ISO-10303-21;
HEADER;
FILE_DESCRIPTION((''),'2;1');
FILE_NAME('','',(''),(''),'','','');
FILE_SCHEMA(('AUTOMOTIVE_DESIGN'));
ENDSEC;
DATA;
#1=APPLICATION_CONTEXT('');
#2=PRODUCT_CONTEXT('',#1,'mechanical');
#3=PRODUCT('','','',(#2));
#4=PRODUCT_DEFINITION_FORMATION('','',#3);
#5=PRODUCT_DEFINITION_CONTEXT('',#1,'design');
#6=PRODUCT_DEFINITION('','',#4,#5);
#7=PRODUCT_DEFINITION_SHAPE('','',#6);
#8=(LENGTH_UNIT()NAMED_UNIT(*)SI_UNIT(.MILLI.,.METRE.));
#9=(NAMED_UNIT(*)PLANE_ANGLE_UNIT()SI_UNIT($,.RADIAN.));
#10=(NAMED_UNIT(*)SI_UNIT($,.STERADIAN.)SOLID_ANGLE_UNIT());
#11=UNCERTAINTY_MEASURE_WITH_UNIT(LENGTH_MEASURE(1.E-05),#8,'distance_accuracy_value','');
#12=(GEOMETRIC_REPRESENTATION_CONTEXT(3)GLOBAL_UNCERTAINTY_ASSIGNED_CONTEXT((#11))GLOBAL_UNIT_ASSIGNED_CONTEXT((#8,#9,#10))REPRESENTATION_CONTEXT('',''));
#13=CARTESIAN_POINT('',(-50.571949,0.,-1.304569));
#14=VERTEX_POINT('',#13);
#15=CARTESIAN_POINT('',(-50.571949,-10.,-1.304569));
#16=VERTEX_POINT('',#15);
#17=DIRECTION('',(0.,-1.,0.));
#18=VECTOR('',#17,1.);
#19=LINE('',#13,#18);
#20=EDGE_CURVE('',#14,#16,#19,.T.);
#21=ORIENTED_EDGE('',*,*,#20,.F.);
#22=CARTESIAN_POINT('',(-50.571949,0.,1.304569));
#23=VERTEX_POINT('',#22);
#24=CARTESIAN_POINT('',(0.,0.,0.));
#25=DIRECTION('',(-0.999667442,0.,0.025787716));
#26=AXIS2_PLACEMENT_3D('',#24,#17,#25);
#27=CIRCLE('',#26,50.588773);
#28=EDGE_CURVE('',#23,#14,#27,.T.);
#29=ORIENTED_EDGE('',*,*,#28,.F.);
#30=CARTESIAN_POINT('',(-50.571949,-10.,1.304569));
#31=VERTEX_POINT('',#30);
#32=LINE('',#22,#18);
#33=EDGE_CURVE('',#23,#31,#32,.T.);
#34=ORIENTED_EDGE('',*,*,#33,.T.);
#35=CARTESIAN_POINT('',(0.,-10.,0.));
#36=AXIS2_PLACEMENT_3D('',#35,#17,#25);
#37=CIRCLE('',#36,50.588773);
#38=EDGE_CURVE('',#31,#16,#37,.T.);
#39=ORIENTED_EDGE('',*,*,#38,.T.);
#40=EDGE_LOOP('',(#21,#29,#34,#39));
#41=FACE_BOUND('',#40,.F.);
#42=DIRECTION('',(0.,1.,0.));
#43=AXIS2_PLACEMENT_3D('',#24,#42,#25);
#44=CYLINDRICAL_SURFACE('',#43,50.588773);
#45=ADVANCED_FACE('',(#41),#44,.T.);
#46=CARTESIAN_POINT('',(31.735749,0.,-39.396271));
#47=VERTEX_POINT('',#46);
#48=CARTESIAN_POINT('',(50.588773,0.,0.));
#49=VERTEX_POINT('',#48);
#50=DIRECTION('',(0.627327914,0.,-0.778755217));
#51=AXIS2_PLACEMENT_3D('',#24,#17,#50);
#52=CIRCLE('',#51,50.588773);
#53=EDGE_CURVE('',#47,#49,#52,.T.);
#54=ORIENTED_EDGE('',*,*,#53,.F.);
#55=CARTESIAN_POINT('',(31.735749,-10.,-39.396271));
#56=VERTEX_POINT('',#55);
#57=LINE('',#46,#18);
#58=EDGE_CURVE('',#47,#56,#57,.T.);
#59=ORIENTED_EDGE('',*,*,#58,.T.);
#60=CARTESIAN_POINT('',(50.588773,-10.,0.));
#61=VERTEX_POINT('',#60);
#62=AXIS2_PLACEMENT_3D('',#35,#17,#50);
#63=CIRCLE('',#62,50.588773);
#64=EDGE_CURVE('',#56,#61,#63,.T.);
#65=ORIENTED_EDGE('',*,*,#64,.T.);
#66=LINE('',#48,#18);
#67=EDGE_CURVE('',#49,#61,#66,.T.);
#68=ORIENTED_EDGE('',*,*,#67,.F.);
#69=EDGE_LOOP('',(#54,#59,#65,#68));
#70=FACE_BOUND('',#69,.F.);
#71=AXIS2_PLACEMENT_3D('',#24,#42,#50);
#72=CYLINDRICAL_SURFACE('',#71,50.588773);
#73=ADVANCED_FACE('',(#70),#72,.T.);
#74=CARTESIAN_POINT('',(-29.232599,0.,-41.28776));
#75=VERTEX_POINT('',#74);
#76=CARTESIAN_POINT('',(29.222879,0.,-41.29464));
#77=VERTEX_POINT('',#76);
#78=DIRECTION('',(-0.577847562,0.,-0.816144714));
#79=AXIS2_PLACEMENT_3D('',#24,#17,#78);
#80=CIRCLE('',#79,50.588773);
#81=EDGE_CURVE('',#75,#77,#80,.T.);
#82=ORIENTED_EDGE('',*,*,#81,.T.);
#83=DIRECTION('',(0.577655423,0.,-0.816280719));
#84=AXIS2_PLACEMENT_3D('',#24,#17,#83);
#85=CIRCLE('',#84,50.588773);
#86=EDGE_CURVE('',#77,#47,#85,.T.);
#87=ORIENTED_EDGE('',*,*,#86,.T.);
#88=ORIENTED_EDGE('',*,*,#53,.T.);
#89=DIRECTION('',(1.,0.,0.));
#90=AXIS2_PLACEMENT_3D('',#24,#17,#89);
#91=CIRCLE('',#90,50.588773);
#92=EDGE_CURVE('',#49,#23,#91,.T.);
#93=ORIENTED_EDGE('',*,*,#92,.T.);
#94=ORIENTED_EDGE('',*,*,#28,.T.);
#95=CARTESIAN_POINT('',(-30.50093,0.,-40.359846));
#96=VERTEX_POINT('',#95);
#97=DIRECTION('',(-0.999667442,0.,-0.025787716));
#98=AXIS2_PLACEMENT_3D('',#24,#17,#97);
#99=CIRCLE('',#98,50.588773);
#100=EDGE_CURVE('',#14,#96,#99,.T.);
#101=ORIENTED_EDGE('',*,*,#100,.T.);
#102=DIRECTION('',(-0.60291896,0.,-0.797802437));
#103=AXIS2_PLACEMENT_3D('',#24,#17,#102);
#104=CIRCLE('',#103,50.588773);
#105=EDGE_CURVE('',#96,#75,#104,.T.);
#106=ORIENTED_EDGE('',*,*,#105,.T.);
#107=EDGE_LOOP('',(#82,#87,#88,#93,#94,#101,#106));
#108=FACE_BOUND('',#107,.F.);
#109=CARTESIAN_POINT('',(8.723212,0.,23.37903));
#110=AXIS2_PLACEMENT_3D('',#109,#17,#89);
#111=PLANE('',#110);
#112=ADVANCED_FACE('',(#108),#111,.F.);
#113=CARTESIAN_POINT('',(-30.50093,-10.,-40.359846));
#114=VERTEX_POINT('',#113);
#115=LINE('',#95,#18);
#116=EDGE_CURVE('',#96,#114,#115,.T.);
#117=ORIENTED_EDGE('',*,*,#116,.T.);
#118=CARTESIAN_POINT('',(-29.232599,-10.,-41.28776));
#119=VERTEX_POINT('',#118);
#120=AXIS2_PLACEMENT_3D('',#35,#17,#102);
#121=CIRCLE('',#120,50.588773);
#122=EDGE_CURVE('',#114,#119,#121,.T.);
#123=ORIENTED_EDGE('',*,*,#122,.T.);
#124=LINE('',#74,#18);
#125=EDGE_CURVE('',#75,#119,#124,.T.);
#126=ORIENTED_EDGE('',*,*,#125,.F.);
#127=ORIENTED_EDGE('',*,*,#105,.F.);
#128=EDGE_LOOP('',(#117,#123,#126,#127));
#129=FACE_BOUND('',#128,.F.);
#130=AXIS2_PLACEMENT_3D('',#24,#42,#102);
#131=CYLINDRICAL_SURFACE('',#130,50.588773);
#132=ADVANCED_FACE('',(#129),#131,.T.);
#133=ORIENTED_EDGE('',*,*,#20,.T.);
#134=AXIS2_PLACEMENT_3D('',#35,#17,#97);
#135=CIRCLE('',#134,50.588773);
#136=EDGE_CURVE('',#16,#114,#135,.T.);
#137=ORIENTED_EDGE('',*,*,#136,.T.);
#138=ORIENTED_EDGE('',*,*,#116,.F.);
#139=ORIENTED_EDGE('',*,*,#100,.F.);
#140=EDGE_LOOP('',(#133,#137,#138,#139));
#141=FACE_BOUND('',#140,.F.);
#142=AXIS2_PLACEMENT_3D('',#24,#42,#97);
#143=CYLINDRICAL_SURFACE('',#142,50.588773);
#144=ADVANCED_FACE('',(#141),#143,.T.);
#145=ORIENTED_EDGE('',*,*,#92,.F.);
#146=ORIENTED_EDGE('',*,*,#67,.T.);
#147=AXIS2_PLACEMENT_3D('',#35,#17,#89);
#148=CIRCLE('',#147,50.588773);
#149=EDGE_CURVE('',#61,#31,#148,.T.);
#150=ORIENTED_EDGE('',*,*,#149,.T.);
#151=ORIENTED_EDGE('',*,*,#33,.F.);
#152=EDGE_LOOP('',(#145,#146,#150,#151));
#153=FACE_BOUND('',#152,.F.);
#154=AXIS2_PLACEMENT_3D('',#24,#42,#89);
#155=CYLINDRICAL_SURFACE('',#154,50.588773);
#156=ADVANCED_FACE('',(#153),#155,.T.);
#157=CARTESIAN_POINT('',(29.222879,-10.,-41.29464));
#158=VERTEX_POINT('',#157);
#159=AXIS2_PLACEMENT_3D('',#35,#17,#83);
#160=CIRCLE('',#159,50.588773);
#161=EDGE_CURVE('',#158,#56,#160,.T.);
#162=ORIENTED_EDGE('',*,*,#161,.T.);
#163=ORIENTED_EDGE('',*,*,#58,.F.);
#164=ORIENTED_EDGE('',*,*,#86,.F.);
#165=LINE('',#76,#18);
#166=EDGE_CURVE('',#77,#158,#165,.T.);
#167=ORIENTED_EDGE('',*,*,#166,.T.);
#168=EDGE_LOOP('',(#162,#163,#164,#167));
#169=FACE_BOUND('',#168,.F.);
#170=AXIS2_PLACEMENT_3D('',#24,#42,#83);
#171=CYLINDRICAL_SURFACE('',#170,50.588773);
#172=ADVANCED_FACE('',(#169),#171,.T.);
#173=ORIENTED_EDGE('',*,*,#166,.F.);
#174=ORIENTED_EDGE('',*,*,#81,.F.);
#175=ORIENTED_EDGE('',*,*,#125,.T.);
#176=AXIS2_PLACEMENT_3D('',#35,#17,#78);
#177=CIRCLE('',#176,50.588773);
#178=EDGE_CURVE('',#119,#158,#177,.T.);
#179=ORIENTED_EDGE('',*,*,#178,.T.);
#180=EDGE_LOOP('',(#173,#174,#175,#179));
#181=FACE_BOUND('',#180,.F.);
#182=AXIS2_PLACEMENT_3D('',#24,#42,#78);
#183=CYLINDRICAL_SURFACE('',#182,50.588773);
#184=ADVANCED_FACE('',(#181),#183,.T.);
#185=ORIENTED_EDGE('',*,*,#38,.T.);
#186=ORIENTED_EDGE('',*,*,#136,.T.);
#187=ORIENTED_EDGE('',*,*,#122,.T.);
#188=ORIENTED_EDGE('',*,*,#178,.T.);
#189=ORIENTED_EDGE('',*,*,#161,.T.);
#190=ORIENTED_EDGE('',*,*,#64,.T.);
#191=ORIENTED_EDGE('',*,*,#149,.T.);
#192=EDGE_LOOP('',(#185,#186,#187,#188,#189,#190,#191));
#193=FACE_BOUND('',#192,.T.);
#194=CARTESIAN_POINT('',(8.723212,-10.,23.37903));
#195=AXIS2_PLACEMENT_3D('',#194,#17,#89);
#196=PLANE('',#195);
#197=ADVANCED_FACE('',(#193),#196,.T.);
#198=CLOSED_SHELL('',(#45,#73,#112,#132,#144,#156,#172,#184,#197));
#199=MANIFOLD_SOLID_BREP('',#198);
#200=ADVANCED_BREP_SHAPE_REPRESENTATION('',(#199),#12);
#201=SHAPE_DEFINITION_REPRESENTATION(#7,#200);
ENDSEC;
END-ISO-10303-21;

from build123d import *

# Parameters (mm, degrees)
F1_DEPTH = 10


# Not quite as in the source:
# - a feature names something its author has since deleted; it is built from what else it names


with BuildPart() as f1:
    # F0 (on Front) → F1 (new body)
    with BuildSketch(Plane.XZ):
        with BuildLine():
            ThreePointArc((0, 12.4140736889), (4.3797238065, 11.6158187371), (8.1961939537, 9.3237133283))
            Line((8.1961939537, 9.3237133283), (21.0697077151, 23.9681876437))
            ThreePointArc((21.0697077151, 23.9681876437), (18.4530079812, 27.8283575749), (18.0439527664, 32.4738611241))
            Line((18.0439527664, 32.4738611241), (12.5602155062, 33.3932852461))
            Line((12.5602155062, 33.3932852461), (7.5710593451, 36.5340338213))
            ThreePointArc((7.5710593451, 36.5340338213), (4.3242109258, 33.4682836339), (0, 32.3538112298))
            Line((0, 32.3538112298), (0, 12.4140736889))
        make_face()
        with BuildLine():
            ThreePointArc((-7.9262057201, 9.554291624), (-4.2131665816, 11.6772622181), (0, 12.4140736889))
            Line((0, 12.4140736889), (0, 32.3538112298))
            ThreePointArc((0, 32.3538112298), (-4.3563302657, 33.4861038791), (-7.6099407791, 36.5963641019))
            Line((-7.6099407791, 36.5963641019), (-12.278520326, 33.7106778775))
            Line((-12.278520326, 33.7106778775), (-17.78879081, 33.0882026957))
            ThreePointArc((-17.78879081, 33.0882026957), (-17.7466642393, 32.5900633313), (-17.73260723, 32.0903435349))
            ThreePointArc((-17.73260723, 32.0903435349), (-18.5760333574, 28.310954716), (-20.9462636845, 25.2487405378))
            Line((-20.9462636845, 25.2487405378), (-7.9262057201, 9.554291624))
        make_face()
        with BuildLine():
            Line((-12.278520326, 33.7106778775), (-7.6099407791, 36.5963641019))
            ThreePointArc((-7.6099407791, 36.5963641019), (-8.921680068, 41.9636267042), (-6.8304445709, 47.0778130421))
            ThreePointArc((-6.8304445709, 47.0778130421), (-17.0260006599, 47.3423785206), (-24.8514976267, 40.8016632631))
            ThreePointArc((-24.8514976267, 40.8016632631), (-20.0657845476, 38.0934673525), (-17.78879081, 33.0882026957))
            Line((-17.78879081, 33.0882026957), (-12.278520326, 33.7106778775))
        make_face()
        with BuildLine():
            ThreePointArc((-6.8304445709, 47.0778130421), (-8.921680068, 41.9636267042), (-7.6099407791, 36.5963641019))
            Line((-7.6099407791, 36.5963641019), (0, 41.3001291454))
            ThreePointArc((0, 41.3001291454), (-2.9563177988, 44.7314932731), (-6.8304445709, 47.0778130421))
        make_face()
        with BuildLine():
            ThreePointArc((-6.8304445709, 47.0778130421), (-2.9563177988, 44.7314932731), (0, 41.3001291454))
            ThreePointArc((0, 41.3001291454), (2.9670877078, 44.7179968563), (6.8263210631, 47.0826843755))
            ThreePointArc((6.8263210631, 47.0826843755), (-0.0031911285, 50.2464464918), (-6.8304445709, 47.0778130421))
        make_face()
        with BuildLine():
            Line((0, 41.3001291454), (7.5710593451, 36.5340338213))
            ThreePointArc((7.5710593451, 36.5340338213), (8.5956299393, 38.8198569439), (8.9463179156, 41.3001291454))
            ThreePointArc((8.9463179156, 41.3001291454), (8.3996143563, 44.3795906098), (6.8263210631, 47.0826843755))
            ThreePointArc((6.8263210631, 47.0826843755), (2.9670877078, 44.7179968563), (0, 41.3001291454))
        make_face()
        with BuildLine():
            Line((0, 41.3001291454), (0, 32.3538112298))
            ThreePointArc((0, 32.3538112298), (4.3242109258, 33.4682836339), (7.5710593451, 36.5340338213))
            Line((7.5710593451, 36.5340338213), (0, 41.3001291454))
        make_face()
        with BuildLine():
            ThreePointArc((-7.6099407791, 36.5963641019), (-4.3563302657, 33.4861038791), (0, 32.3538112298))
            Line((0, 32.3538112298), (0, 41.3001291454))
            Line((0, 41.3001291454), (-7.6099407791, 36.5963641019))
        make_face()
        with BuildLine():
            ThreePointArc((36.4223056753, 29.9139118839), (45.9083800473, 20.8806963335), (46.4937895072, 7.7947540314))
            ThreePointArc((46.4937895072, 7.7947540314), (49.4692239822, 4.3915233547), (50.5414702125, 0))
            ThreePointArc((50.5414702125, 0), (49.3916524089, -4.5377847699), (46.2196804198, -7.9804821571))
            ThreePointArc((46.2196804198, -7.9804821571), (45.2541028323, -22.5688235592), (34.2624022156, -32.2090809466))
            ThreePointArc((34.2624022156, -32.2090809466), (34.2845647661, -32.5811281227), (34.291956159, -32.953761518))
            ThreePointArc((34.291956159, -32.953761518), (33.6295574849, -36.4193105223), (31.7357494034, -39.3962708606))
            ThreePointArc((31.7357494034, -39.3962708606), (45.6327545118, -21.8374829955), (50.5887729434, 0))
            ThreePointArc((50.5887729434, 0), (0.6523386875, 50.5845668377), (-50.5719492199, 1.3045689002))
            ThreePointArc((-50.5719492199, 1.3045689002), (-49.1901644057, 5.1967911583), (-46.3448391854, 8.1905927165))
            ThreePointArc((-46.3448391854, 8.1905927165), (-45.5368746407, 21.848912941), (-35.4561087337, 31.0998954179))
            ThreePointArc((-35.4561087337, 31.0998954179), (-32.6224058372, 38.6491093328), (-24.8514976267, 40.8016632631))
            ThreePointArc((-24.8514976267, 40.8016632631), (-17.0260006599, 47.3423785206), (-6.8304445709, 47.0778130421))
            ThreePointArc((-6.8304445709, 47.0778130421), (-0.0031911285, 50.2464464918), (6.8263210631, 47.0826843755))
            ThreePointArc((6.8263210631, 47.0826843755), (17.6788975714, 47.324411831), (25.7932452382, 40.1137106881))
            ThreePointArc((25.7932452382, 40.1137106881), (33.2437406928, 37.9811469414), (36.4791003688, 30.9391189367))
            ThreePointArc((36.4791003688, 30.9391189367), (36.4648908183, 30.425729431), (36.4223056753, 29.9139118839))
        make_face()
        with BuildLine():
            ThreePointArc((-46.3448391854, 8.1905927165), (-40.2671562667, 9.9229363025), (-34.3745943291, 7.6388702415))
            Line((-34.3745943291, 7.6388702415), (-29.0687931112, 14.021677727))
            Line((-29.0687931112, 14.021677727), (-27.8149031494, 23.2813171291))
            ThreePointArc((-27.8149031494, 23.2813171291), (-32.9795051289, 25.8770971269), (-35.4561087337, 31.0998954179))
            ThreePointArc((-35.4561087337, 31.0998954179), (-45.5368746407, 21.848912941), (-46.3448391854, 8.1905927165))
        make_face()
        with BuildLine():
            ThreePointArc((-35.4561087337, 31.0998954179), (-32.9795051289, 25.8770971269), (-27.8149031494, 23.2813171291))
            Line((-27.8149031494, 23.2813171291), (-26.6220327467, 32.0903435349))
            ThreePointArc((-26.6220327467, 32.0903435349), (-31.1003542851, 32.1417240723), (-35.4561087337, 31.0998954179))
        make_face()
        with BuildLine():
            ThreePointArc((-35.4561087337, 31.0998954179), (-31.1003542851, 32.1417240723), (-26.6220327467, 32.0903435349))
            ThreePointArc((-26.6220327467, 32.0903435349), (-26.4240541647, 36.5856916795), (-24.8514976267, 40.8016632631))
            ThreePointArc((-24.8514976267, 40.8016632631), (-32.6224058372, 38.6491093328), (-35.4561087337, 31.0998954179))
        make_face()
        with BuildLine():
            ThreePointArc((-24.8514976267, 40.8016632631), (-26.4240541647, 36.5856916795), (-26.6220327467, 32.0903435349))
            Line((-26.6220327467, 32.0903435349), (-17.78879081, 33.0882026957))
            ThreePointArc((-17.78879081, 33.0882026957), (-20.0657845476, 38.0934673525), (-24.8514976267, 40.8016632631))
        make_face()
        with BuildLine():
            Line((-26.6220327467, 32.0903435349), (-20.9462636845, 25.2487405378))
            ThreePointArc((-20.9462636845, 25.2487405378), (-18.5760333574, 28.310954716), (-17.73260723, 32.0903435349))
            ThreePointArc((-17.73260723, 32.0903435349), (-17.7466642393, 32.5900633313), (-17.78879081, 33.0882026957))
            Line((-17.78879081, 33.0882026957), (-26.6220327467, 32.0903435349))
        make_face()
        with BuildLine():
            ThreePointArc((-27.8149031494, 23.2813171291), (-24.1742207002, 23.544578373), (-20.9462636845, 25.2487405378))
            Line((-20.9462636845, 25.2487405378), (-26.6220327467, 32.0903435349))
            Line((-26.6220327467, 32.0903435349), (-27.8149031494, 23.2813171291))
        make_face()
        with BuildLine():
            Line((-30.7910450859, 0), (-12.4140736889, 0))
            ThreePointArc((-12.4140736889, 0), (-11.2362299602, 5.27791264), (-7.9262057201, 9.554291624))
            Line((-7.9262057201, 9.554291624), (-20.9462636845, 25.2487405378))
            ThreePointArc((-20.9462636845, 25.2487405378), (-24.1742207002, 23.544578373), (-27.8149031494, 23.2813171291))
            Line((-27.8149031494, 23.2813171291), (-29.0687931112, 14.021677727))
            Line((-29.0687931112, 14.021677727), (-34.3745943291, 7.6388702415))
            ThreePointArc((-34.3745943291, 7.6388702415), (-31.7314462624, 4.2188317027), (-30.7910450859, 0))
        make_face()
        with BuildLine():
            ThreePointArc((-34.0750304122, -7.3795789352), (-31.6491009662, -4.0386490589), (-30.7910450859, 0))
            Line((-30.7910450859, 0), (-40.7245159149, 0))
            Line((-40.7245159149, 0), (-34.0750304122, -7.3795789352))
        make_face()
        with BuildLine():
            Line((-40.7245159149, 0), (-30.7910450859, 0))
            ThreePointArc((-30.7910450859, 0), (-31.7314462624, 4.2188317027), (-34.3745943291, 7.6388702415))
            Line((-34.3745943291, 7.6388702415), (-40.7245159149, 0))
        make_face()
        with BuildLine():
            Line((-40.7245159149, 0), (-34.3745943291, 7.6388702415))
            ThreePointArc((-34.3745943291, 7.6388702415), (-40.2671562667, 9.9229363025), (-46.3448391854, 8.1905927165))
            ThreePointArc((-46.3448391854, 8.1905927165), (-44.1031958217, 3.7051833857), (-40.7245159149, 0))
        make_face()
        with BuildLine():
            ThreePointArc((-46.139511468, -8.3277647585), (-43.9781949987, -3.8087367386), (-40.7245159149, 0))
            ThreePointArc((-40.7245159149, 0), (-44.1031958217, 3.7051833857), (-46.3448391854, 8.1905927165))
            ThreePointArc((-46.3448391854, 8.1905927165), (-49.1901644057, 5.1967911583), (-50.5719492199, 1.3045689002))
            ThreePointArc((-50.5719492199, 1.3045689002), (-50.5887729434, 0), (-50.5719492199, -1.3045689002))
            ThreePointArc((-50.5719492199, -1.3045689002), (-49.1249179099, -5.3016119279), (-46.139511468, -8.3277647585))
        make_face()
        with BuildLine():
            ThreePointArc((-46.139511468, -8.3277647585), (-39.9462129869, -9.9029332657), (-34.0750304122, -7.3795789352))
            Line((-34.0750304122, -7.3795789352), (-40.7245159149, 0))
            ThreePointArc((-40.7245159149, 0), (-43.9781949987, -3.8087367386), (-46.139511468, -8.3277647585))
        make_face()
        with BuildLine():
            ThreePointArc((-30.5009303557, -40.3598463247), (-33.0177016325, -36.8777345609), (-33.7279636415, -32.640427884))
            ThreePointArc((-33.7279636415, -32.640427884), (-44.9854308164, -23.0629718726), (-46.139511468, -8.3277647585))
            ThreePointArc((-46.139511468, -8.3277647585), (-49.1249179099, -5.3016119279), (-50.5719492199, -1.3045689002))
            ThreePointArc((-50.5719492199, -1.3045689002), (-44.9947955251, -23.1234150499), (-30.5009303557, -40.3598463247))
        make_face()
        with BuildLine():
            ThreePointArc((-33.7279636415, -32.640427884), (-31.3725828689, -26.9858355888), (-26.0396213441, -23.9722407284))
            Line((-26.0396213441, -23.9722407284), (-27.8331619734, -14.3067856835))
            Line((-27.8331619734, -14.3067856835), (-34.0750304122, -7.3795789352))
            ThreePointArc((-34.0750304122, -7.3795789352), (-39.9462129869, -9.9029332657), (-46.139511468, -8.3277647585))
            ThreePointArc((-46.139511468, -8.3277647585), (-44.9854308164, -23.0629718726), (-33.7279636415, -32.640427884))
        make_face()
        with BuildLine():
            Line((-18.7530413406, -25.632855502), (-7.3299455485, -10.0190380681))
            ThreePointArc((-7.3299455485, -10.0190380681), (-11.0703141267, -5.6175947424), (-12.4140736889, 0))
            Line((-12.4140736889, 0), (-30.7910450859, 0))
            ThreePointArc((-30.7910450859, 0), (-31.6491009662, -4.0386490589), (-34.0750304122, -7.3795789352))
            Line((-34.0750304122, -7.3795789352), (-27.8331619734, -14.3067856835))
            Line((-27.8331619734, -14.3067856835), (-26.0396213441, -23.9722407284))
            ThreePointArc((-26.0396213441, -23.9722407284), (-22.2247546471, -24.0496899951), (-18.7530413406, -25.632855502))
        make_face()
        with BuildLine():
            Line((-24.3195872754, -33.2415662706), (-18.7530413406, -25.632855502))
            ThreePointArc((-18.7530413406, -25.632855502), (-22.2247546471, -24.0496899951), (-26.0396213441, -23.9722407284))
            Line((-26.0396213441, -23.9722407284), (-24.3195872754, -33.2415662706))
        make_face()
        with BuildLine():
            Line((-24.3195872754, -33.2415662706), (-26.0396213441, -23.9722407284))
            ThreePointArc((-26.0396213441, -23.9722407284), (-31.3725828689, -26.9858355888), (-33.7279636415, -32.640427884))
            ThreePointArc((-33.7279636415, -32.640427884), (-29.0611287118, -33.5256103283), (-24.3195872754, -33.2415662706))
        make_face()
        with BuildLine():
            ThreePointArc((-22.7066374003, -42.5301240653), (-24.4011253438, -38.0400478438), (-24.3195872754, -33.2415662706))
            ThreePointArc((-24.3195872754, -33.2415662706), (-29.0611287118, -33.5256103283), (-33.7279636415, -32.640427884))
            ThreePointArc((-33.7279636415, -32.640427884), (-33.0177016325, -36.8777345609), (-30.5009303557, -40.3598463247))
            ThreePointArc((-30.5009303557, -40.3598463247), (-29.8703681269, -40.8287283157), (-29.2325991317, -41.2877596379))
            ThreePointArc((-29.2325991317, -41.2877596379), (-26.0826725293, -42.5027996438), (-22.7066374003, -42.5301240653))
        make_face()
        with BuildLine():
            Line((-15.0911921565, -35.1691649674), (-24.3195872754, -33.2415662706))
            ThreePointArc((-24.3195872754, -33.2415662706), (-24.4011253438, -38.0400478438), (-22.7066374003, -42.5301240653))
            ThreePointArc((-22.7066374003, -42.5301240653), (-17.7675173712, -40.0201570663), (-15.0911921565, -35.1691649674))
        make_face()
        with BuildLine():
            ThreePointArc((-14.8920259149, -33.2415662706), (-15.9125108938, -28.9754228225), (-18.7530413406, -25.632855502))
            Line((-18.7530413406, -25.632855502), (-24.3195872754, -33.2415662706))
            Line((-24.3195872754, -33.2415662706), (-15.0911921565, -35.1691649674))
            ThreePointArc((-15.0911921565, -35.1691649674), (-14.9419496612, -34.2104965993), (-14.8920259149, -33.2415662706))
        make_face()
        with BuildLine():
            Line((0, -31.5046176402), (0, -12.4140736889))
            ThreePointArc((0, -12.4140736889), (-3.8556548526, -11.8001335252), (-7.3299455485, -10.0190380681))
            Line((-7.3299455485, -10.0190380681), (-18.7530413406, -25.632855502))
            ThreePointArc((-18.7530413406, -25.632855502), (-15.9125108938, -28.9754228225), (-14.8920259149, -33.2415662706))
            ThreePointArc((-14.8920259149, -33.2415662706), (-14.9419496612, -34.2104965993), (-15.0911921565, -35.1691649674))
            Line((-15.0911921565, -35.1691649674), (-11.8124056821, -35.854027769))
            Line((-11.8124056821, -35.854027769), (-8.5237688791, -37.209996633))
            ThreePointArc((-8.5237688791, -37.209996633), (-5.1284984488, -33.0625960348), (0, -31.5046176402))
        make_face()
        with BuildLine():
            ThreePointArc((-6.3531457642, -47.4061283415), (-9.0178114186, -42.6442863227), (-8.5237688791, -37.209996633))
            Line((-8.5237688791, -37.209996633), (-11.8124056821, -35.854027769))
            Line((-11.8124056821, -35.854027769), (-15.0911921565, -35.1691649674))
            ThreePointArc((-15.0911921565, -35.1691649674), (-17.7675173712, -40.0201570663), (-22.7066374003, -42.5301240653))
            ThreePointArc((-22.7066374003, -42.5301240653), (-15.4632390175, -48.0984535393), (-6.3531457642, -47.4061283415))
        make_face()
        with BuildLine():
            ThreePointArc((29.2228790167, -41.2946399656), (26.2897143388, -42.2464687444), (23.206366099, -42.197512799))
            ThreePointArc((23.206366099, -42.197512799), (15.8115613872, -47.9336831156), (6.4750778857, -47.288034253))
            ThreePointArc((6.4750778857, -47.288034253), (0.0848729286, -49.9440160857), (-6.3531457642, -47.4061283415))
            ThreePointArc((-6.3531457642, -47.4061283415), (-15.4632390175, -48.0984535393), (-22.7066374003, -42.5301240653))
            ThreePointArc((-22.7066374003, -42.5301240653), (-26.0826725293, -42.5027996438), (-29.2325991317, -41.2877596379))
            ThreePointArc((-29.2325991317, -41.2877596379), (-0.0059544006, -50.588772593), (29.2228790167, -41.2946399656))
        make_face()
        with BuildLine():
            Line((19.2309829091, -25.4560439964), (7.4830019114, -9.905246486))
            ThreePointArc((7.4830019114, -9.905246486), (3.9461858655, -11.7701674869), (0, -12.4140736889))
            Line((0, -12.4140736889), (0, -31.5046176402))
            ThreePointArc((0, -31.5046176402), (5.0176698122, -32.9895625997), (8.4190600767, -36.9660706339))
            Line((8.4190600767, -36.9660706339), (11.9896721342, -35.3720759819))
            Line((11.9896721342, -35.3720759819), (15.6591926585, -34.6844592594))
            ThreePointArc((15.6591926585, -34.6844592594), (16.1319190758, -29.5619993381), (19.2309829091, -25.4560439964))
        make_face()
        with BuildLine():
            ThreePointArc((23.206366099, -42.197512799), (18.2657550813, -39.6133102694), (15.6591926585, -34.6844592594))
            Line((15.6591926585, -34.6844592594), (11.9896721342, -35.3720759819))
            Line((11.9896721342, -35.3720759819), (8.4190600767, -36.9660706339))
            ThreePointArc((8.4190600767, -36.9660706339), (9.0174636571, -38.8031052324), (9.2198945494, -40.7245121896))
            ThreePointArc((9.2198945494, -40.7245121896), (8.5060563956, -44.2816824271), (6.4750778857, -47.288034253))
            ThreePointArc((6.4750778857, -47.288034253), (15.8115613872, -47.9336831156), (23.206366099, -42.197512799))
        make_face()
        with BuildLine():
            ThreePointArc((8.4190600767, -36.9660706339), (5.0176698122, -32.9895625997), (0, -31.5046176402))
            Line((0, -31.5046176402), (0, -40.7245121896))
            Line((0, -40.7245121896), (8.4190600767, -36.9660706339))
        make_face()
        with BuildLine():
            Line((0, -40.7245121896), (0, -31.5046176402))
            ThreePointArc((0, -31.5046176402), (-5.1284984488, -33.0625960348), (-8.5237688791, -37.209996633))
            Line((-8.5237688791, -37.209996633), (0, -40.7245121896))
        make_face()
        with BuildLine():
            Line((0, -40.7245121896), (-8.5237688791, -37.209996633))
            ThreePointArc((-8.5237688791, -37.209996633), (-9.0178114186, -42.6442863227), (-6.3531457642, -47.4061283415))
            ThreePointArc((-6.3531457642, -47.4061283415), (-2.5528912915, -44.6583414697), (0, -40.7245121896))
        make_face()
        with BuildLine():
            ThreePointArc((6.4750778857, -47.288034253), (2.6424912294, -44.5933026018), (0, -40.7245121896))
            ThreePointArc((0, -40.7245121896), (-2.5528912915, -44.6583414697), (-6.3531457642, -47.4061283415))
            ThreePointArc((-6.3531457642, -47.4061283415), (0.0848729286, -49.9440160857), (6.4750778857, -47.288034253))
        make_face()
        with BuildLine():
            ThreePointArc((9.2198945494, -40.7245121896), (9.0174636571, -38.8031052324), (8.4190600767, -36.9660706339))
            Line((8.4190600767, -36.9660706339), (0, -40.7245121896))
            ThreePointArc((0, -40.7245121896), (2.6424912294, -44.5933026018), (6.4750778857, -47.288034253))
            ThreePointArc((6.4750778857, -47.288034253), (8.5060563956, -44.2816824271), (9.2198945494, -40.7245121896))
        make_face()
        with BuildLine():
            Line((31.4831711226, 0), (12.4140736889, 0))
            ThreePointArc((12.4140736889, 0), (11.113140031, -5.5323904603), (7.4830019114, -9.905246486))
            Line((7.4830019114, -9.905246486), (19.2309829091, -25.4560439964))
            ThreePointArc((19.2309829091, -25.4560439964), (22.6706111136, -23.8241226738), (26.4754028959, -23.6908227053))
            Line((26.4754028959, -23.6908227053), (28.1101843832, -14.1079709863))
            Line((28.1101843832, -14.1079709863), (34.5814156225, -7.0319379514))
            ThreePointArc((34.5814156225, -7.0319379514), (32.2920641652, -3.8421110842), (31.4831711226, 0))
        make_face()
        with BuildLine():
            ThreePointArc((46.2196804198, -7.9804821571), (40.2382406985, -9.4976571454), (34.5814156225, -7.0319379514))
            Line((34.5814156225, -7.0319379514), (28.1101843832, -14.1079709863))
            Line((28.1101843832, -14.1079709863), (26.4754028959, -23.6908227053))
            ThreePointArc((26.4754028959, -23.6908227053), (31.8307310628, -26.6136155389), (34.2624022156, -32.2090809466))
            ThreePointArc((34.2624022156, -32.2090809466), (45.2541028323, -22.5688235592), (46.2196804198, -7.9804821571))
        make_face()
        with BuildLine():
            ThreePointArc((8.1961939537, 9.3237133283), (11.3105566013, 5.1166917947), (12.4140736889, 0))
            Line((12.4140736889, 0), (31.4831711226, 0))
            ThreePointArc((31.4831711226, 0), (32.4069275416, 4.0929085256), (34.9990987759, 7.3922833775))
            Line((34.9990987759, 7.3922833775), (29.9410622795, 13.6103208604))
            Line((29.9410622795, 13.6103208604), (28.6489670456, 21.7718335631))
            ThreePointArc((28.6489670456, 21.7718335631), (24.6142989754, 22.0244230757), (21.0697077151, 23.9681876437))
            Line((21.0697077151, 23.9681876437), (8.1961939537, 9.3237133283))
        make_face()
        with BuildLine():
            Line((12.5602155062, 33.3932852461), (18.0439527664, 32.4738611241))
            ThreePointArc((18.0439527664, 32.4738611241), (20.681498993, 37.5486077071), (25.7932452382, 40.1137106881))
            ThreePointArc((25.7932452382, 40.1137106881), (17.6788975714, 47.324411831), (6.8263210631, 47.0826843755))
            ThreePointArc((6.8263210631, 47.0826843755), (8.3996143563, 44.3795906098), (8.9463179156, 41.3001291454))
            ThreePointArc((8.9463179156, 41.3001291454), (8.5956299393, 38.8198569439), (7.5710593451, 36.5340338213))
            Line((7.5710593451, 36.5340338213), (12.5602155062, 33.3932852461))
        make_face()
        with BuildLine():
            ThreePointArc((26.4754028959, -23.6908227053), (22.6706111136, -23.8241226738), (19.2309829091, -25.4560439964))
            Line((19.2309829091, -25.4560439964), (24.8951967806, -32.953761518))
            Line((24.8951967806, -32.953761518), (26.4754028959, -23.6908227053))
        make_face()
        with BuildLine():
            Line((24.8951967806, -32.953761518), (19.2309829091, -25.4560439964))
            ThreePointArc((19.2309829091, -25.4560439964), (16.1319190758, -29.5619993381), (15.6591926585, -34.6844592594))
            Line((15.6591926585, -34.6844592594), (24.8951967806, -32.953761518))
        make_face()
        with BuildLine():
            ThreePointArc((34.2624022156, -32.2090809466), (31.8307310628, -26.6136155389), (26.4754028959, -23.6908227053))
            Line((26.4754028959, -23.6908227053), (24.8951967806, -32.953761518))
            ThreePointArc((24.8951967806, -32.953761518), (29.6252644616, -33.1658958053), (34.2624022156, -32.2090809466))
        make_face()
        with BuildLine():
            ThreePointArc((46.4937895072, 7.7947540314), (44.2923929818, 3.5181009217), (41.0123206675, 0))
            ThreePointArc((41.0123206675, 0), (44.1211918052, -3.6605977574), (46.2196804198, -7.9804821571))
            ThreePointArc((46.2196804198, -7.9804821571), (49.3916524089, -4.5377847699), (50.5414702125, 0))
            ThreePointArc((50.5414702125, 0), (49.4692239822, 4.3915233547), (46.4937895072, 7.7947540314))
        make_face()
        with BuildLine():
            Line((41.0123206675, 0), (34.5814156225, -7.0319379514))
            ThreePointArc((34.5814156225, -7.0319379514), (40.2382406985, -9.4976571454), (46.2196804198, -7.9804821571))
            ThreePointArc((46.2196804198, -7.9804821571), (44.1211918052, -3.6605977574), (41.0123206675, 0))
        make_face()
        with BuildLine():
            ThreePointArc((46.4937895072, 7.7947540314), (40.678875044, 9.523313765), (34.9990987759, 7.3922833775))
            Line((34.9990987759, 7.3922833775), (41.0123206675, 0))
            ThreePointArc((41.0123206675, 0), (44.2923929818, 3.5181009217), (46.4937895072, 7.7947540314))
        make_face()
        with BuildLine():
            Line((29.9410622795, 13.6103208604), (34.9990987759, 7.3922833775))
            ThreePointArc((34.9990987759, 7.3922833775), (40.678875044, 9.523313765), (46.4937895072, 7.7947540314))
            ThreePointArc((46.4937895072, 7.7947540314), (45.9083800473, 20.8806963335), (36.4223056753, 29.9139118839))
            ThreePointArc((36.4223056753, 29.9139118839), (33.9108785019, 24.5299127589), (28.6489670456, 21.7718335631))
            Line((28.6489670456, 21.7718335631), (29.9410622795, 13.6103208604))
        make_face()
        with BuildLine():
            Line((24.8951967806, -32.953761518), (15.6591926585, -34.6844592594))
            ThreePointArc((15.6591926585, -34.6844592594), (18.2657550813, -39.6133102694), (23.206366099, -42.197512799))
            ThreePointArc((23.206366099, -42.197512799), (24.9060219327, -37.7318893488), (24.8951967806, -32.953761518))
        make_face()
        with BuildLine():
            ThreePointArc((34.2624022156, -32.2090809466), (29.6252644616, -33.1658958053), (24.8951967806, -32.953761518))
            ThreePointArc((24.8951967806, -32.953761518), (24.9060219327, -37.7318893488), (23.206366099, -42.197512799))
            ThreePointArc((23.206366099, -42.197512799), (26.2897143388, -42.2464687444), (29.2228790167, -41.2946399656))
            ThreePointArc((29.2228790167, -41.2946399656), (30.494090346, -40.3650145781), (31.7357494034, -39.3962708606))
            ThreePointArc((31.7357494034, -39.3962708606), (33.6295574849, -36.4193105223), (34.291956159, -32.953761518))
            ThreePointArc((34.291956159, -32.953761518), (34.2845647661, -32.5811281227), (34.2624022156, -32.2090809466))
        make_face()
        with BuildLine():
            ThreePointArc((34.9990987759, 7.3922833775), (32.4069275416, 4.0929085256), (31.4831711226, 0))
            Line((31.4831711226, 0), (41.0123206675, 0))
            Line((41.0123206675, 0), (34.9990987759, 7.3922833775))
        make_face()
        with BuildLine():
            Line((41.0123206675, 0), (31.4831711226, 0))
            ThreePointArc((31.4831711226, 0), (32.2920641652, -3.8421110842), (34.5814156225, -7.0319379514))
            Line((34.5814156225, -7.0319379514), (41.0123206675, 0))
        make_face()
        with BuildLine():
            ThreePointArc((25.7932452382, 40.1137106881), (20.681498993, 37.5486077071), (18.0439527664, 32.4738611241))
            Line((18.0439527664, 32.4738611241), (27.1976422518, 30.9391189367))
            ThreePointArc((27.1976422518, 30.9391189367), (27.2310665217, 35.6390199788), (25.7932452382, 40.1137106881))
        make_face()
        with BuildLine():
            ThreePointArc((25.7932452382, 40.1137106881), (27.2310665217, 35.6390199788), (27.1976422518, 30.9391189367))
            ThreePointArc((27.1976422518, 30.9391189367), (31.8789975875, 31.0475799041), (36.4223056753, 29.9139118839))
            ThreePointArc((36.4223056753, 29.9139118839), (36.4648908183, 30.425729431), (36.4791003688, 30.9391189367))
            ThreePointArc((36.4791003688, 30.9391189367), (33.2437406928, 37.9811469414), (25.7932452382, 40.1137106881))
        make_face()
        with BuildLine():
            Line((27.1976422518, 30.9391189367), (28.6489670456, 21.7718335631))
            ThreePointArc((28.6489670456, 21.7718335631), (33.9108785019, 24.5299127589), (36.4223056753, 29.9139118839))
            ThreePointArc((36.4223056753, 29.9139118839), (31.8789975875, 31.0475799041), (27.1976422518, 30.9391189367))
        make_face()
        with BuildLine():
            Line((27.1976422518, 30.9391189367), (21.0697077151, 23.9681876437))
            ThreePointArc((21.0697077151, 23.9681876437), (24.6142989754, 22.0244230757), (28.6489670456, 21.7718335631))
            Line((28.6489670456, 21.7718335631), (27.1976422518, 30.9391189367))
        make_face()
        with BuildLine():
            ThreePointArc((18.0439527664, 32.4738611241), (18.4530079812, 27.8283575749), (21.0697077151, 23.9681876437))
            Line((21.0697077151, 23.9681876437), (27.1976422518, 30.9391189367))
            Line((27.1976422518, 30.9391189367), (18.0439527664, 32.4738611241))
        make_face()
        with BuildLine():
            Line((0, 0), (8.1961939537, 9.3237133283))
            ThreePointArc((8.1961939537, 9.3237133283), (4.3797238065, 11.6158187371), (0, 12.4140736889))
            Line((0, 12.4140736889), (0, 0))
        make_face()
        with BuildLine():
            Line((-7.9262057201, 9.554291624), (0, 0))
            Line((0, 0), (0, 12.4140736889))
            ThreePointArc((0, 12.4140736889), (-4.2131665816, 11.6772622181), (-7.9262057201, 9.554291624))
        make_face()
        with BuildLine():
            Line((-12.4140736889, 0), (0, 0))
            Line((0, 0), (-7.9262057201, 9.554291624))
            ThreePointArc((-7.9262057201, 9.554291624), (-11.2362299602, 5.27791264), (-12.4140736889, 0))
        make_face()
        with BuildLine():
            Line((-7.3299455485, -10.0190380681), (0, 0))
            Line((0, 0), (-12.4140736889, 0))
            ThreePointArc((-12.4140736889, 0), (-11.0703141267, -5.6175947424), (-7.3299455485, -10.0190380681))
        make_face()
        with BuildLine():
            Line((0, -12.4140736889), (0, 0))
            Line((0, 0), (-7.3299455485, -10.0190380681))
            ThreePointArc((-7.3299455485, -10.0190380681), (-3.8556548526, -11.8001335252), (0, -12.4140736889))
        make_face()
        with BuildLine():
            ThreePointArc((0, -12.4140736889), (3.9461858655, -11.7701674869), (7.4830019114, -9.905246486))
            Line((7.4830019114, -9.905246486), (0, 0))
            Line((0, 0), (0, -12.4140736889))
        make_face()
        with BuildLine():
            ThreePointArc((7.4830019114, -9.905246486), (11.113140031, -5.5323904603), (12.4140736889, 0))
            Line((12.4140736889, 0), (0, 0))
            Line((0, 0), (7.4830019114, -9.905246486))
        make_face()
        with BuildLine():
            Line((0, 0), (12.4140736889, 0))
            ThreePointArc((12.4140736889, 0), (11.3105566013, 5.1166917947), (8.1961939537, 9.3237133283))
            Line((8.1961939537, 9.3237133283), (0, 0))
        make_face()
    extrude(amount=F1_DEPTH)


solid = f1.part
